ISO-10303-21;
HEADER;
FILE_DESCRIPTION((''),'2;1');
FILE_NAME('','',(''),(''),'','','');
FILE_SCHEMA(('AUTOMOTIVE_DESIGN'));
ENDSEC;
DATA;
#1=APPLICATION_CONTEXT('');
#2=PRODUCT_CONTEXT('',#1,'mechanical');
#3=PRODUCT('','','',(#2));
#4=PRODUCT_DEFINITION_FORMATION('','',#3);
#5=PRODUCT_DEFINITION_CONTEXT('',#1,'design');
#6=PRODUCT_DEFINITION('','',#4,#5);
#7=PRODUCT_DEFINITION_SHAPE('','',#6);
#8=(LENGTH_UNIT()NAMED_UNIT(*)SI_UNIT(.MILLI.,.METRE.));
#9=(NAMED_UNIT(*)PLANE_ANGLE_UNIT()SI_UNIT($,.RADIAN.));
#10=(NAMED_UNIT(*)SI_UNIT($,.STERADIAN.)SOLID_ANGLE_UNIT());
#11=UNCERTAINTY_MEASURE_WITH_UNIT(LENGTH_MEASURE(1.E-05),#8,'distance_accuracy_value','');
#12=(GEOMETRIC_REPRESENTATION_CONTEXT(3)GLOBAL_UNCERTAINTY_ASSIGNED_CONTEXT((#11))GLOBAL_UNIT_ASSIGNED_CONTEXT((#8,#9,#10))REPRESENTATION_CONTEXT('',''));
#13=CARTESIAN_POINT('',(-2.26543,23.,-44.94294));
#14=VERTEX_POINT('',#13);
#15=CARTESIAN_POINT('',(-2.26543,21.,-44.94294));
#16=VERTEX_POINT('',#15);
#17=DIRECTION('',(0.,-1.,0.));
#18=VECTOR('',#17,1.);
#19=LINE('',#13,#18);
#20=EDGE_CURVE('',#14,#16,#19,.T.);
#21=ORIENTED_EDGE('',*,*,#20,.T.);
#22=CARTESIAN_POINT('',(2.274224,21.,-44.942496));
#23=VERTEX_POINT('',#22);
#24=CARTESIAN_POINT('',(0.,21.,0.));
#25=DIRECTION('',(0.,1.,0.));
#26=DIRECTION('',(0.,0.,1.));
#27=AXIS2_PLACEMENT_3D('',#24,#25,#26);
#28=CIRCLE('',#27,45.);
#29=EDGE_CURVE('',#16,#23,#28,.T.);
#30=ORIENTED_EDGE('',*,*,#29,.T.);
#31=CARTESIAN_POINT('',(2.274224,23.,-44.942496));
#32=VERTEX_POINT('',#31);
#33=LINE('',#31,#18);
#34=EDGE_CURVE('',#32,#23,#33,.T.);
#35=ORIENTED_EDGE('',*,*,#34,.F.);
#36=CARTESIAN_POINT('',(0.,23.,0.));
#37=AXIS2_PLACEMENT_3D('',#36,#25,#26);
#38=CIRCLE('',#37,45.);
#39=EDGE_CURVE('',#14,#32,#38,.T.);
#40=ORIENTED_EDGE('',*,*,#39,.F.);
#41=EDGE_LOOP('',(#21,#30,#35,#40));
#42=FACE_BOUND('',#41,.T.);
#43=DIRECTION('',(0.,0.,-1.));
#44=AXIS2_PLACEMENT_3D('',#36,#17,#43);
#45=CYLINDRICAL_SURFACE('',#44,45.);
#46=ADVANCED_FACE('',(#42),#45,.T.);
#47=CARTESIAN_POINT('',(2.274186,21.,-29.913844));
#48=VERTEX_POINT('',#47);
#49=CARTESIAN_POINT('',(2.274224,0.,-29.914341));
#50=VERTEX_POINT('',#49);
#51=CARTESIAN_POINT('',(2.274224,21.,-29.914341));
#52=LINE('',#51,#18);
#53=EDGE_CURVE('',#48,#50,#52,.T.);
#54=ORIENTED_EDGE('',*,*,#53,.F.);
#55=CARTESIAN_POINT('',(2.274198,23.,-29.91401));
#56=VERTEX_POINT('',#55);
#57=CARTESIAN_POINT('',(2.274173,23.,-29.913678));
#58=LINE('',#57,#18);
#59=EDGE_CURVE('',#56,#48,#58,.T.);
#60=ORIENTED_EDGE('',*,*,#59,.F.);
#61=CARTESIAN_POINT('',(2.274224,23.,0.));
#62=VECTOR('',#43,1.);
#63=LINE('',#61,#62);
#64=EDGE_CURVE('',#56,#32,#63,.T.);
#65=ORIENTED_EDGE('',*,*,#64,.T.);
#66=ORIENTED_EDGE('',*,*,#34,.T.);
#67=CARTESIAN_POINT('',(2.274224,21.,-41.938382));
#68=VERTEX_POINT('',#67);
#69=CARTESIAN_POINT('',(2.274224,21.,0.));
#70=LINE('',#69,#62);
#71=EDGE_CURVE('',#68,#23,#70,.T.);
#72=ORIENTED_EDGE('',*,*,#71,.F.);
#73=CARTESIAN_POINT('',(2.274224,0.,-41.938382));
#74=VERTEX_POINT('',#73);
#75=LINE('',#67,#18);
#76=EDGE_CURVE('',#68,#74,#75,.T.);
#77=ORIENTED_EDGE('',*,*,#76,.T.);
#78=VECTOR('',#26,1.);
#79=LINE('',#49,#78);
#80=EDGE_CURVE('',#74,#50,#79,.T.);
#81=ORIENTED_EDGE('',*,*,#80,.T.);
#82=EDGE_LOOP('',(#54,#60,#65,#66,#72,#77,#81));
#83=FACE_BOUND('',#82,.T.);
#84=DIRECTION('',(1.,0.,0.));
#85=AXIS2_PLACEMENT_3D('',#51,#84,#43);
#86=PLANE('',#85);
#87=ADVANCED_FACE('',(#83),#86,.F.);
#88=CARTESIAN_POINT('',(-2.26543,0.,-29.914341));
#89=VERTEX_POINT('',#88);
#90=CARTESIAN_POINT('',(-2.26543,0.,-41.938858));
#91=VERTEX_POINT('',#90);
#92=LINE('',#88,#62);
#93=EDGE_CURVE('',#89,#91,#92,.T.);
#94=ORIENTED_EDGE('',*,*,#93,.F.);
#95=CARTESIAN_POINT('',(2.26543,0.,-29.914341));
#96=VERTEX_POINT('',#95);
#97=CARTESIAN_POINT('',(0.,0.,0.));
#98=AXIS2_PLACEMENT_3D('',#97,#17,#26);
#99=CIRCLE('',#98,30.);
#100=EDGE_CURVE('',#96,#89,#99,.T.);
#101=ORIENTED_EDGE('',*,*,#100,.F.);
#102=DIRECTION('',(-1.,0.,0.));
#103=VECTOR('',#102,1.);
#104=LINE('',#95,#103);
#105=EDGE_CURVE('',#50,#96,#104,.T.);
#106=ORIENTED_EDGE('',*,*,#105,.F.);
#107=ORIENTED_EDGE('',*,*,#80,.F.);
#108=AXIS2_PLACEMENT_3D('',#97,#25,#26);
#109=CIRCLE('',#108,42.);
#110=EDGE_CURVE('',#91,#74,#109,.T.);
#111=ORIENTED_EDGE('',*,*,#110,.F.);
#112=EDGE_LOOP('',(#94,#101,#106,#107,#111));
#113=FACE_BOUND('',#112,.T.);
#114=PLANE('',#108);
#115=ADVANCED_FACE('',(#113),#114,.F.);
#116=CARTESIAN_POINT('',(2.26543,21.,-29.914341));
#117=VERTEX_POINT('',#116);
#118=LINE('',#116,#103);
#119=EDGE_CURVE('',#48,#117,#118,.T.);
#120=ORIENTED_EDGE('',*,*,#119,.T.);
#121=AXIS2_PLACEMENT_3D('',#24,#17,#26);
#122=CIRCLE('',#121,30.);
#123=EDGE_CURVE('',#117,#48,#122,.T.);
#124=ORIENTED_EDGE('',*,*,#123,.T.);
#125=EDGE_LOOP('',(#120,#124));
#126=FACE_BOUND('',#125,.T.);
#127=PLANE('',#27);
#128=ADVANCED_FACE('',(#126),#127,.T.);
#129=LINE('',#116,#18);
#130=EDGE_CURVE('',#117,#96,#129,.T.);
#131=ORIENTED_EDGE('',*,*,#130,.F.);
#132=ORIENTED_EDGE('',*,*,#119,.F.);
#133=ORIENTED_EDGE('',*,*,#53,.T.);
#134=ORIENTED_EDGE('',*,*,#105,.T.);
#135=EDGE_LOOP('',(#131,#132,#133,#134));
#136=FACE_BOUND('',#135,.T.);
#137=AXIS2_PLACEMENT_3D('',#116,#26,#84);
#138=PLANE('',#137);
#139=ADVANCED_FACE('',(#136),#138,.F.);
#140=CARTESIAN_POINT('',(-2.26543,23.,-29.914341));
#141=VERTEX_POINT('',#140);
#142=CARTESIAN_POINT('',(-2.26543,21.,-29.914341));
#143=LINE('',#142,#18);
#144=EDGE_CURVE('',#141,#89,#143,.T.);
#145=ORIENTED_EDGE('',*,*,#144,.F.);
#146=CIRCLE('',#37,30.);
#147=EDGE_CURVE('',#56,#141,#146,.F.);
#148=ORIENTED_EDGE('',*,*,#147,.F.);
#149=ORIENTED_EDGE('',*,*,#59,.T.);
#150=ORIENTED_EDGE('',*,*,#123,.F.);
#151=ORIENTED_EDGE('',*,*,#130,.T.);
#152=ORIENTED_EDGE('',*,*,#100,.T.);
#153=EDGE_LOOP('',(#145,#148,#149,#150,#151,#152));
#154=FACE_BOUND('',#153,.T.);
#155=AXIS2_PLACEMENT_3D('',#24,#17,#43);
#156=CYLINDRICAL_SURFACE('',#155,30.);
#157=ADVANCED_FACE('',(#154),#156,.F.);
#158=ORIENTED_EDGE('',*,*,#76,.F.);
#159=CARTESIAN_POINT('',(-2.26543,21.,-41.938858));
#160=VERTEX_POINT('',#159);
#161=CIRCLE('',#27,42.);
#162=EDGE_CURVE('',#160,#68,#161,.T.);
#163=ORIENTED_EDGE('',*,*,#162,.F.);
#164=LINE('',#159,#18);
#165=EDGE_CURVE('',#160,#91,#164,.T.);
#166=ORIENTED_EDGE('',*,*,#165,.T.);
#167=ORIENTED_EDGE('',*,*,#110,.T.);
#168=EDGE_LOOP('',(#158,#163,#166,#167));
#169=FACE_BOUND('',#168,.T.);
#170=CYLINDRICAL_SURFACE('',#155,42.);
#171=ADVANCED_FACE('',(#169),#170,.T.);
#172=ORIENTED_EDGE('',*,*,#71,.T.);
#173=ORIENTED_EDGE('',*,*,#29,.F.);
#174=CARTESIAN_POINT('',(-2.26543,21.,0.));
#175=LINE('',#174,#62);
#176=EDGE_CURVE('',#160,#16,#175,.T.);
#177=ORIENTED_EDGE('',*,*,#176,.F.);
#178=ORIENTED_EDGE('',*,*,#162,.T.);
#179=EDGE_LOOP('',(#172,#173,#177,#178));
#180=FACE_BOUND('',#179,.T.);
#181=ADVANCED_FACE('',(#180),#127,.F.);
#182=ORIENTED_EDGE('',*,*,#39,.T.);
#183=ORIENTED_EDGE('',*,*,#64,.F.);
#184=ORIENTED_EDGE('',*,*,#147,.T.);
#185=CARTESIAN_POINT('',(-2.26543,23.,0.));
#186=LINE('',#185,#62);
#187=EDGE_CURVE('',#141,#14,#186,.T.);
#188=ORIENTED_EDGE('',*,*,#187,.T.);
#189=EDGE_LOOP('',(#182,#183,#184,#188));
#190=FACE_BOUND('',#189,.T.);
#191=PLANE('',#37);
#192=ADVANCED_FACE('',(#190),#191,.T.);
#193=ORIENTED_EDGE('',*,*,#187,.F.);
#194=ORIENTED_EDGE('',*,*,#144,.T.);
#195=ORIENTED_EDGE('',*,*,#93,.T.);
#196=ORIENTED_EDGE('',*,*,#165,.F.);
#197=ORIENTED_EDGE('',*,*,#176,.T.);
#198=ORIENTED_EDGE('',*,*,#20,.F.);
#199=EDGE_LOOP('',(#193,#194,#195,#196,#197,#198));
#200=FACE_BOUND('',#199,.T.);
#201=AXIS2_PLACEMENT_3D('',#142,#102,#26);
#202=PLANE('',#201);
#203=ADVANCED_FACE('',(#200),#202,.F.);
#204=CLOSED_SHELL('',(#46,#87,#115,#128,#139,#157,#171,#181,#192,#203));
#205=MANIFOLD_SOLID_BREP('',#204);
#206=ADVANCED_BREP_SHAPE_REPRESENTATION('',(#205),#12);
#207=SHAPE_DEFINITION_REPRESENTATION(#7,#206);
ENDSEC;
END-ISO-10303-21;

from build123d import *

# Parameters (mm, degrees)
BOSS_EXTRUDE1_DEPTH = 21
BOSS_EXTRUDE2_DEPTH = 2


with BuildPart() as part:
    # Sketch1 → Boss-Extrude1 (new body)
    with BuildSketch(Plane(origin=(0, 0, 0), x_dir=(1, 0, 0), z_dir=(0, 1, 0))):
        with BuildLine():
            Line((2.265430343, 29.914341466), (2.274223615, 29.914341466))
            Line((2.274223615, 29.914341466), (2.274223615, 41.938382264))
            ThreePointArc((2.274223615, 41.938382264), (-0.004403071, -41.999999769), (-2.265430343, 41.938858179))
            Line((-2.265430343, 41.938858179), (-2.265430343, 29.914341466))
            ThreePointArc((-2.265430343, 29.914341466), (0, -30), (2.265430343, 29.914341466))
        make_face()
    extrude(amount=BOSS_EXTRUDE1_DEPTH)

    # Boss-Extrude2: read off the stored shape, not the designer's step
    # Boss-Extrude2 outline → Boss-Extrude2 (add)
    with BuildSketch(Plane(origin=(0, 21, 0), x_dir=(1, 0, 0), z_dir=(0, 1, 0))):
        with BuildLine():
            ThreePointArc((-2.265430343, 44.942939661), (-0.004402235, -44.999999785), (2.274223615, 44.942495558))
            Line((2.274223615, 44.942495558), (2.274223325, 29.913674269))
            ThreePointArc((2.274223325, 29.913674269), (-0.004409129, -29.999999676), (-2.265430343, 29.914341466))
            Line((-2.265430343, 29.914341466), (-2.265430343, 44.942939661))
        make_face()
    extrude(amount=BOSS_EXTRUDE2_DEPTH)


solid = part.part
